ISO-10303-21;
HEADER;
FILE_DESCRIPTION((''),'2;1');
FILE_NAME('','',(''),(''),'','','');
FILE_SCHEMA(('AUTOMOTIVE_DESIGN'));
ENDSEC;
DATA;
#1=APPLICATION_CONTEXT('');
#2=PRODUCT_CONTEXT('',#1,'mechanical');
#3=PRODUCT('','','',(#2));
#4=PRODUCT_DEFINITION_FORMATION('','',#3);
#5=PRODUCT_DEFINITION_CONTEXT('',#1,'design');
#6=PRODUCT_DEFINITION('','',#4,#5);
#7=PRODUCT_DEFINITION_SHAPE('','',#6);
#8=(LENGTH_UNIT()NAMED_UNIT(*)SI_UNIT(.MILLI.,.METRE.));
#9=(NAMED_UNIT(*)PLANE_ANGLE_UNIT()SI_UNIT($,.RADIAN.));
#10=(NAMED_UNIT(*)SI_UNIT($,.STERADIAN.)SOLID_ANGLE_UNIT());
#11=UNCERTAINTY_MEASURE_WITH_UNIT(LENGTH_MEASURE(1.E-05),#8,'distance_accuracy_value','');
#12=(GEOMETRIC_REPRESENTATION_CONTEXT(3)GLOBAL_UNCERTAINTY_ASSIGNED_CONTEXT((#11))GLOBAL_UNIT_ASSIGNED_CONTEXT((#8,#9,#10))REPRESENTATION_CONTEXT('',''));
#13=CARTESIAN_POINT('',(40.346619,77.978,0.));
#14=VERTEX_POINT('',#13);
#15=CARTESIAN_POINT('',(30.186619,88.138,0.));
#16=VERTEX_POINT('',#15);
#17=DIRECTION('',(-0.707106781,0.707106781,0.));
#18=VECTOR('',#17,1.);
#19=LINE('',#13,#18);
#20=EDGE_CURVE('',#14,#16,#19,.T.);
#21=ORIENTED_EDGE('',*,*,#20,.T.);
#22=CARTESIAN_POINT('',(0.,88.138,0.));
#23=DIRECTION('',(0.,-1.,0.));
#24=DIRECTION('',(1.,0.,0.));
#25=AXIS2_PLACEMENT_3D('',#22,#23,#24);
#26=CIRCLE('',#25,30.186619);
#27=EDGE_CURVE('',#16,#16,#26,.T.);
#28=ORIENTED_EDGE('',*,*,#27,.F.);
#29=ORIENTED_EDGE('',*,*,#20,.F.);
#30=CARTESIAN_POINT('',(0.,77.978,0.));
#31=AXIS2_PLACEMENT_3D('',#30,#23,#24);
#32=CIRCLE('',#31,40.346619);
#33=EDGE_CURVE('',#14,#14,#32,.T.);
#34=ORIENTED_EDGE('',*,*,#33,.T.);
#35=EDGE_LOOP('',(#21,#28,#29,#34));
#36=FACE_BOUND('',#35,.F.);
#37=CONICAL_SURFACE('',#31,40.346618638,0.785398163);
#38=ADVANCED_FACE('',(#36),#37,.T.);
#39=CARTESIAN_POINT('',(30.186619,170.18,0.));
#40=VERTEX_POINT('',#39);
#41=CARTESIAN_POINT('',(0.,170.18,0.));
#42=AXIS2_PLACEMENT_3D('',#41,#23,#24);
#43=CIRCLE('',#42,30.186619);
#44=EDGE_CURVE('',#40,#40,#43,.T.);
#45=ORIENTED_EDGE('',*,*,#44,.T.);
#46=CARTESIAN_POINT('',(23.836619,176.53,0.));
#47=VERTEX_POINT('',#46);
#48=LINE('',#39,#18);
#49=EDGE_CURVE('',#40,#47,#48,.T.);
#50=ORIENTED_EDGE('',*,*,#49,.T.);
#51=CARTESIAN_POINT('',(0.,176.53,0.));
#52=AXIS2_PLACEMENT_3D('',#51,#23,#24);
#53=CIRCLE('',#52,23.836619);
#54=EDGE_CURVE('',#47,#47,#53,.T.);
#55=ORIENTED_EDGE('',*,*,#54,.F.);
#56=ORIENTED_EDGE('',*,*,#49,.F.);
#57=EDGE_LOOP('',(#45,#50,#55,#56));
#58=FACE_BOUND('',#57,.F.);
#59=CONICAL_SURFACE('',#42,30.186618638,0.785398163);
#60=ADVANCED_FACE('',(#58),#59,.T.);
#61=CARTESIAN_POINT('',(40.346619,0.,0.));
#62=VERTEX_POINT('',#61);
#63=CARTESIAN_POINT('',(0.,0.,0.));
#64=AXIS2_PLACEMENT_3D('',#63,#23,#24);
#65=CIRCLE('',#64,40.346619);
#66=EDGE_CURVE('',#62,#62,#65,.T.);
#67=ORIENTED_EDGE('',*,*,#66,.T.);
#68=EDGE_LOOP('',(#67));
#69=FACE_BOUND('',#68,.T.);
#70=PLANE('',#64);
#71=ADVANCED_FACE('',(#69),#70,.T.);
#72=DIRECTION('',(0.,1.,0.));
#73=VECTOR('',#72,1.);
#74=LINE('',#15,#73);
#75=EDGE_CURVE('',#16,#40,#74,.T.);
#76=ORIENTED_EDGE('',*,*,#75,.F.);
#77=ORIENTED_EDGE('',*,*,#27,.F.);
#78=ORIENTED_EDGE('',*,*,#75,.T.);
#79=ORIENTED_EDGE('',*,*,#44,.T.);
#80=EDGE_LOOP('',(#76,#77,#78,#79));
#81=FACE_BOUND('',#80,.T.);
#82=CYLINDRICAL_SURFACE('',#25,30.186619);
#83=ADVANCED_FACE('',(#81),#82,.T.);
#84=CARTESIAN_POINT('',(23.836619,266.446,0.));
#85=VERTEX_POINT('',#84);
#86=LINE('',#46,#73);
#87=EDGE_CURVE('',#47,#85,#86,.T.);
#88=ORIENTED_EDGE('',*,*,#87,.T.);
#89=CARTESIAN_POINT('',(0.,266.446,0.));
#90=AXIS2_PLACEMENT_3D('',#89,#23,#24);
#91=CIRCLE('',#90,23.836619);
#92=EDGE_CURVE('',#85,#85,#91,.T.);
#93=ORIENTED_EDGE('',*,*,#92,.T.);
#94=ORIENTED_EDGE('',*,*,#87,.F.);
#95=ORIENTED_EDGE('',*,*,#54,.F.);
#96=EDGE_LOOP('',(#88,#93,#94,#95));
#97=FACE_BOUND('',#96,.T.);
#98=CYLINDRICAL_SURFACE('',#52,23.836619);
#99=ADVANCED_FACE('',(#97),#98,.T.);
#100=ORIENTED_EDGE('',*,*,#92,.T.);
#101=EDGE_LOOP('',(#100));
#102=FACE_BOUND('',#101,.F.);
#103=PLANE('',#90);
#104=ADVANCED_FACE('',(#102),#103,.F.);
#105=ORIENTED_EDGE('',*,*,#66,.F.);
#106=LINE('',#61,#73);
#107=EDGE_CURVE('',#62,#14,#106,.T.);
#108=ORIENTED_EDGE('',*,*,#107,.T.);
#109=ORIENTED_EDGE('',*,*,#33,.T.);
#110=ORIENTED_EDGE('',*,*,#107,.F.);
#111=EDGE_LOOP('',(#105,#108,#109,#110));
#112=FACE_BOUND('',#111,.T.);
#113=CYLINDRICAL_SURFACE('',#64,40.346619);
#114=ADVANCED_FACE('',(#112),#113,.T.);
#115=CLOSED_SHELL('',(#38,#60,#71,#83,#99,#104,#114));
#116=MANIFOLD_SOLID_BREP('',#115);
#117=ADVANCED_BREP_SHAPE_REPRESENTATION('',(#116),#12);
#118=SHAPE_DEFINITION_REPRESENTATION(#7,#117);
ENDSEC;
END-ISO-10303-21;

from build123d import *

# Parameters (mm, degrees)
F0_R     = 40.346618638
F1_DEPTH = 88.138
F2_SIZE  = 10.16
F3_DEPTH = 88.392
F4_SIZE  = 6.35
F5_DEPTH = 89.916


with BuildPart() as f1:
    # F0 (on Front) → F1 (new body)
    with BuildSketch(Plane.XZ):
        Circle(F0_R)
    extrude(amount=-F1_DEPTH)

    # F2
    f2_edges = [f1.edges().sort_by_distance(p)[0] for p in [
        (-40.346619, 88.138, 0),
    ]]
    chamfer(f2_edges, length=F2_SIZE)

    # F3 (add): a face of the model
    f3_faces = [f1.faces().sort_by_distance(p)[0] for p in [
        (0, 88.138, 0),
    ]]
    extrude(f3_faces, amount=F3_DEPTH)

    # F4
    f4_edges = [f1.edges().sort_by_distance(p)[0] for p in [
        (-30.186619, 176.53, 0),
    ]]
    chamfer(f4_edges, length=F4_SIZE)

    # F5 (add): a face of the model
    f5_faces = [f1.faces().sort_by_distance(p)[0] for p in [
        (0, 176.53, 0),
    ]]
    extrude(f5_faces, amount=F5_DEPTH)


solid = f1.part
